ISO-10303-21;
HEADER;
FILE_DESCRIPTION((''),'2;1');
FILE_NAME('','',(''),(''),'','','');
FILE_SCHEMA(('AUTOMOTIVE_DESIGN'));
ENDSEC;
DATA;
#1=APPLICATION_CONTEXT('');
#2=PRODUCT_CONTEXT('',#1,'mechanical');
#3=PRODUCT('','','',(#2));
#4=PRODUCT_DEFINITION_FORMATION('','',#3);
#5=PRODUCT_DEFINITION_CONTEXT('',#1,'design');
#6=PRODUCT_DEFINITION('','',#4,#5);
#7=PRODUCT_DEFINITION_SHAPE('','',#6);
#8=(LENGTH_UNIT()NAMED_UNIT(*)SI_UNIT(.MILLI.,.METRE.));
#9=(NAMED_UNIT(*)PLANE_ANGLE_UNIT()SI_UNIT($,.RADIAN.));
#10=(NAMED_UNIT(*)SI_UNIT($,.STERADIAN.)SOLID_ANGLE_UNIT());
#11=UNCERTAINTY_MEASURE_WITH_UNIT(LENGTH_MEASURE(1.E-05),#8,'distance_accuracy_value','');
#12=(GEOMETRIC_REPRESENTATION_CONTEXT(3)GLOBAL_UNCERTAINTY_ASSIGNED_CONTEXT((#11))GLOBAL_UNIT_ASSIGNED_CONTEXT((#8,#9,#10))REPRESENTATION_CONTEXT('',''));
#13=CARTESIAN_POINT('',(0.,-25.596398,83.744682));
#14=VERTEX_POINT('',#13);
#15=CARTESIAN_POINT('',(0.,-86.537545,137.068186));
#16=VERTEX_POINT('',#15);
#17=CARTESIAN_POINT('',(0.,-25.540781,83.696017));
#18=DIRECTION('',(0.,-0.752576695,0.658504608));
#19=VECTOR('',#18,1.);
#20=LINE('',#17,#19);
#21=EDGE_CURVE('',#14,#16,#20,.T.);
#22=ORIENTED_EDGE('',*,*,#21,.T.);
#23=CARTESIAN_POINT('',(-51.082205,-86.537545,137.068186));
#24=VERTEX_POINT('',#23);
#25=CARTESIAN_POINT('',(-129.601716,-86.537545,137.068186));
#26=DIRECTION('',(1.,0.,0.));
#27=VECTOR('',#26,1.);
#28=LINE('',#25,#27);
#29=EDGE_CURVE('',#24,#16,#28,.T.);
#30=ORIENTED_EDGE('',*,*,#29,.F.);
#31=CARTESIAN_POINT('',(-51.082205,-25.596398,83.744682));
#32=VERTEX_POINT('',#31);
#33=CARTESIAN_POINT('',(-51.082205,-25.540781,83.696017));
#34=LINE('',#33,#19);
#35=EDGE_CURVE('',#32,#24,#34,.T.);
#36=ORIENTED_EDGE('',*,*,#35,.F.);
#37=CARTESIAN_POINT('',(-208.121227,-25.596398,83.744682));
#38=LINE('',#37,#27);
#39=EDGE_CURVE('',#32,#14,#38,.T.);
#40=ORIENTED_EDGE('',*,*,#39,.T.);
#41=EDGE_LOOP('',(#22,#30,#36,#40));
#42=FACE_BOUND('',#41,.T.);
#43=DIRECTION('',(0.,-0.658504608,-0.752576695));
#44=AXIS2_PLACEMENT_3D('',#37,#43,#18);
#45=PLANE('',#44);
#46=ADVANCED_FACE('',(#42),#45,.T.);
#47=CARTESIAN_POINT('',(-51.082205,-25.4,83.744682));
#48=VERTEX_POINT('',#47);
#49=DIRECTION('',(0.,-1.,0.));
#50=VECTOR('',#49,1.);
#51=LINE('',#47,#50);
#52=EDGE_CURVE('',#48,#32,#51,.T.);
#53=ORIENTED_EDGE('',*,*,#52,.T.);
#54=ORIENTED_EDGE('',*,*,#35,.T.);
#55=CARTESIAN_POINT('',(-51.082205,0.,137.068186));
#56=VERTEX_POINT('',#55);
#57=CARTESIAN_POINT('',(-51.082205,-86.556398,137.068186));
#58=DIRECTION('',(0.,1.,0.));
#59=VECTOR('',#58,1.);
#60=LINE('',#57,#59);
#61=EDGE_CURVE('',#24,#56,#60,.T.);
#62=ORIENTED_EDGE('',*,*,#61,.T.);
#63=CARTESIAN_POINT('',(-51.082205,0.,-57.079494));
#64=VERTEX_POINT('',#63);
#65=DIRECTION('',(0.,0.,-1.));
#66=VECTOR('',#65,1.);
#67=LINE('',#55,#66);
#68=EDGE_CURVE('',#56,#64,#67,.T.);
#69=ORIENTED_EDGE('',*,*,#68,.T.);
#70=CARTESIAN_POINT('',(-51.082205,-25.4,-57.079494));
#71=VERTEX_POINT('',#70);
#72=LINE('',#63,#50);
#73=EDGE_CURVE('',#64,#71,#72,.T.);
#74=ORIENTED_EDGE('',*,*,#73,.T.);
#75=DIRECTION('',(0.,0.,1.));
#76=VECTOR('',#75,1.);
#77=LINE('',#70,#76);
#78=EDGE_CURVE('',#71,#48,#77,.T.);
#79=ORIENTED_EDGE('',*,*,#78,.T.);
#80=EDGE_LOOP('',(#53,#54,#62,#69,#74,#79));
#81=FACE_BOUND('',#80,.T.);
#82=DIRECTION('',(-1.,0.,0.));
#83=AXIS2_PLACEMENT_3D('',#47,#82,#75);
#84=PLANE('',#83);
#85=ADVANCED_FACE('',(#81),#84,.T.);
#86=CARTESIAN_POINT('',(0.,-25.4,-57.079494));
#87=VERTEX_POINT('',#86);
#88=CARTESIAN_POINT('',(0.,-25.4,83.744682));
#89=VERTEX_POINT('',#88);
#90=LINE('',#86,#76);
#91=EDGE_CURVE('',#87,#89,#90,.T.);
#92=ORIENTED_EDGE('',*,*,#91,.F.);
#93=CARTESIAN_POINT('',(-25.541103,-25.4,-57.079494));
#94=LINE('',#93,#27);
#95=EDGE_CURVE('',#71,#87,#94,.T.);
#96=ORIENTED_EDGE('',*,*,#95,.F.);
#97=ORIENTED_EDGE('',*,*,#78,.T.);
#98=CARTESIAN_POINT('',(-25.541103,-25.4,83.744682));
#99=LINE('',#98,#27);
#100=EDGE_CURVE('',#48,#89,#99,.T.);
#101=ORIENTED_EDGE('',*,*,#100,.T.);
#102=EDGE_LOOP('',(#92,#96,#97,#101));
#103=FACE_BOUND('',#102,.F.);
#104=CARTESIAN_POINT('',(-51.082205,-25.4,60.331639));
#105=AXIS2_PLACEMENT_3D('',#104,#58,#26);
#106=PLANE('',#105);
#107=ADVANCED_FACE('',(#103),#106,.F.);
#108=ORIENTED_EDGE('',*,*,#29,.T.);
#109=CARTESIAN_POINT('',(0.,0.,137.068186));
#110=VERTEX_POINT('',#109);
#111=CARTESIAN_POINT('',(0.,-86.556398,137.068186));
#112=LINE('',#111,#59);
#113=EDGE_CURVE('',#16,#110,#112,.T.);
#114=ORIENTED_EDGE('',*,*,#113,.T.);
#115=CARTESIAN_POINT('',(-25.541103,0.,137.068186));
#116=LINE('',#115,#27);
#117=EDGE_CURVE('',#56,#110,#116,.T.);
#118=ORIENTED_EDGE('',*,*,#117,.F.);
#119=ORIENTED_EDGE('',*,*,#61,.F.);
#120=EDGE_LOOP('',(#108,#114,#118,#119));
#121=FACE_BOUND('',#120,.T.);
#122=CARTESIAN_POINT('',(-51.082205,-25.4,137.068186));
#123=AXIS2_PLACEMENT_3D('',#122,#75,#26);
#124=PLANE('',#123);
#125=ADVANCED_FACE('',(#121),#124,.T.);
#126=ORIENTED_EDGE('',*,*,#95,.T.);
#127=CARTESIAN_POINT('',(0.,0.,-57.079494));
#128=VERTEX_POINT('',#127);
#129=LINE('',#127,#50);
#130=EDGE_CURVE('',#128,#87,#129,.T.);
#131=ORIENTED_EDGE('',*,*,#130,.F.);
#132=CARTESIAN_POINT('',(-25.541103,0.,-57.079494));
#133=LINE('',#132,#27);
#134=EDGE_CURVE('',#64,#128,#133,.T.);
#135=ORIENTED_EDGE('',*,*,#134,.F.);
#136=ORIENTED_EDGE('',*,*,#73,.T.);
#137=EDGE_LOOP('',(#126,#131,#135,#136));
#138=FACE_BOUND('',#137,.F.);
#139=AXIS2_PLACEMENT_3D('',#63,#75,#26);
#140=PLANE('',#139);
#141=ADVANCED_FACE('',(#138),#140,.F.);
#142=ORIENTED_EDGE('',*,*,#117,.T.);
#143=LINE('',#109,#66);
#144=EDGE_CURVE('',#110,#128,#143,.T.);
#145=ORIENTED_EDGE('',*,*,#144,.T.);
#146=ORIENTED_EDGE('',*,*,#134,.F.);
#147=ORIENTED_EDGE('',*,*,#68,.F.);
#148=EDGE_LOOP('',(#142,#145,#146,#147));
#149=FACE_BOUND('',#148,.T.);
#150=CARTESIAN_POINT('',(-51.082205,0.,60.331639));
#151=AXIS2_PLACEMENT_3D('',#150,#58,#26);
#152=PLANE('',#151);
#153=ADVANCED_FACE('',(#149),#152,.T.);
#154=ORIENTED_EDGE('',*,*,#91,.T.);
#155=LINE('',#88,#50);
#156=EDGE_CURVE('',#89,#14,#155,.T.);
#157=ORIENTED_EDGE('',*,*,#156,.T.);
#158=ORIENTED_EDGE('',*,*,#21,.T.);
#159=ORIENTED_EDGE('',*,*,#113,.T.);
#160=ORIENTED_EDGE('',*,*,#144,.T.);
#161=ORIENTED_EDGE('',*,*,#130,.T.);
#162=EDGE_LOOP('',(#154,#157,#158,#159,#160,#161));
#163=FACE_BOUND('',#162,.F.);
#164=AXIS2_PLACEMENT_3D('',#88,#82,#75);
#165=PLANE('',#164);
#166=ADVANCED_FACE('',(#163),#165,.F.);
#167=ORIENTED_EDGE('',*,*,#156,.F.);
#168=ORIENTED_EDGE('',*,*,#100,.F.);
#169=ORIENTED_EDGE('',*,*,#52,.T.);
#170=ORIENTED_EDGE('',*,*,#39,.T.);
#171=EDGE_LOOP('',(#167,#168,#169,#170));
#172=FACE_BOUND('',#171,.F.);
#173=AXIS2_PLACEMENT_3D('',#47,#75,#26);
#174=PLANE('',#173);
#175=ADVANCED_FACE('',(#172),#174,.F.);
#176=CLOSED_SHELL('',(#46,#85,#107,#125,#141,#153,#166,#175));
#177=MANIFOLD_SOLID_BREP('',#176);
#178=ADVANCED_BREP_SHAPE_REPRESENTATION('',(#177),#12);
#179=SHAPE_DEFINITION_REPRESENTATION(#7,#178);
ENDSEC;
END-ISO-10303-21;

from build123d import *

# Parameters (mm, degrees)
F0_W        = 51.0822050273
F0_H        = 117.4111329019
F1_DEPTH    = 25.4
F2_DEPTH    = 76.7365470529
F3_W        = 51.0822050273
F3_H        = 53.3235035837
F4_DEPTH    = 61.1563976854
F5_T1_DEPTH = 365.1602492866


# Not quite as in the source:
# - a fillet or chamfer that OpenCascade refuses, or shapes differently, is made with other operations: its cross-section is extruded or revolved along the edge and cut away or added


with BuildPart() as f1:
    # F0 (on Front) → F1 (new body)
    with BuildSketch(Plane.XZ):
        with Locations((-25.5411025137, 1.6260724515)):
            Rectangle(F0_W, F0_H)
    extrude(amount=F1_DEPTH)

    # F2 (add): a face of the model
    f2_faces = [f1.faces().sort_by_distance(p)[0] for p in [
        (-25.5411025137, -12.7, 60.3316389024),
    ]]
    extrude(f2_faces, amount=F2_DEPTH)

    # F3 (on face) → F4 (join)
    with BuildSketch(Plane.XZ.offset(25.4)):
        with Locations((-25.5411025137, 110.4064341635)):
            Rectangle(F3_W, F3_H)
    extrude(amount=F4_DEPTH)

    # F5: chamfer of 60.96 x 53.34 on 1 edges, made by hand

    # F5_s2 → F5_t1 (cut)
    with BuildSketch(Plane.YZ.offset(-208.121227157)):
        Polygon((-25.5963976854, 83.7446823716), (-86.5563976854, 137.0846823716), (-86.5563976854, 83.7446823716), align=None)
    extrude(amount=F5_T1_DEPTH, mode=Mode.SUBTRACT)


solid = f1.part
